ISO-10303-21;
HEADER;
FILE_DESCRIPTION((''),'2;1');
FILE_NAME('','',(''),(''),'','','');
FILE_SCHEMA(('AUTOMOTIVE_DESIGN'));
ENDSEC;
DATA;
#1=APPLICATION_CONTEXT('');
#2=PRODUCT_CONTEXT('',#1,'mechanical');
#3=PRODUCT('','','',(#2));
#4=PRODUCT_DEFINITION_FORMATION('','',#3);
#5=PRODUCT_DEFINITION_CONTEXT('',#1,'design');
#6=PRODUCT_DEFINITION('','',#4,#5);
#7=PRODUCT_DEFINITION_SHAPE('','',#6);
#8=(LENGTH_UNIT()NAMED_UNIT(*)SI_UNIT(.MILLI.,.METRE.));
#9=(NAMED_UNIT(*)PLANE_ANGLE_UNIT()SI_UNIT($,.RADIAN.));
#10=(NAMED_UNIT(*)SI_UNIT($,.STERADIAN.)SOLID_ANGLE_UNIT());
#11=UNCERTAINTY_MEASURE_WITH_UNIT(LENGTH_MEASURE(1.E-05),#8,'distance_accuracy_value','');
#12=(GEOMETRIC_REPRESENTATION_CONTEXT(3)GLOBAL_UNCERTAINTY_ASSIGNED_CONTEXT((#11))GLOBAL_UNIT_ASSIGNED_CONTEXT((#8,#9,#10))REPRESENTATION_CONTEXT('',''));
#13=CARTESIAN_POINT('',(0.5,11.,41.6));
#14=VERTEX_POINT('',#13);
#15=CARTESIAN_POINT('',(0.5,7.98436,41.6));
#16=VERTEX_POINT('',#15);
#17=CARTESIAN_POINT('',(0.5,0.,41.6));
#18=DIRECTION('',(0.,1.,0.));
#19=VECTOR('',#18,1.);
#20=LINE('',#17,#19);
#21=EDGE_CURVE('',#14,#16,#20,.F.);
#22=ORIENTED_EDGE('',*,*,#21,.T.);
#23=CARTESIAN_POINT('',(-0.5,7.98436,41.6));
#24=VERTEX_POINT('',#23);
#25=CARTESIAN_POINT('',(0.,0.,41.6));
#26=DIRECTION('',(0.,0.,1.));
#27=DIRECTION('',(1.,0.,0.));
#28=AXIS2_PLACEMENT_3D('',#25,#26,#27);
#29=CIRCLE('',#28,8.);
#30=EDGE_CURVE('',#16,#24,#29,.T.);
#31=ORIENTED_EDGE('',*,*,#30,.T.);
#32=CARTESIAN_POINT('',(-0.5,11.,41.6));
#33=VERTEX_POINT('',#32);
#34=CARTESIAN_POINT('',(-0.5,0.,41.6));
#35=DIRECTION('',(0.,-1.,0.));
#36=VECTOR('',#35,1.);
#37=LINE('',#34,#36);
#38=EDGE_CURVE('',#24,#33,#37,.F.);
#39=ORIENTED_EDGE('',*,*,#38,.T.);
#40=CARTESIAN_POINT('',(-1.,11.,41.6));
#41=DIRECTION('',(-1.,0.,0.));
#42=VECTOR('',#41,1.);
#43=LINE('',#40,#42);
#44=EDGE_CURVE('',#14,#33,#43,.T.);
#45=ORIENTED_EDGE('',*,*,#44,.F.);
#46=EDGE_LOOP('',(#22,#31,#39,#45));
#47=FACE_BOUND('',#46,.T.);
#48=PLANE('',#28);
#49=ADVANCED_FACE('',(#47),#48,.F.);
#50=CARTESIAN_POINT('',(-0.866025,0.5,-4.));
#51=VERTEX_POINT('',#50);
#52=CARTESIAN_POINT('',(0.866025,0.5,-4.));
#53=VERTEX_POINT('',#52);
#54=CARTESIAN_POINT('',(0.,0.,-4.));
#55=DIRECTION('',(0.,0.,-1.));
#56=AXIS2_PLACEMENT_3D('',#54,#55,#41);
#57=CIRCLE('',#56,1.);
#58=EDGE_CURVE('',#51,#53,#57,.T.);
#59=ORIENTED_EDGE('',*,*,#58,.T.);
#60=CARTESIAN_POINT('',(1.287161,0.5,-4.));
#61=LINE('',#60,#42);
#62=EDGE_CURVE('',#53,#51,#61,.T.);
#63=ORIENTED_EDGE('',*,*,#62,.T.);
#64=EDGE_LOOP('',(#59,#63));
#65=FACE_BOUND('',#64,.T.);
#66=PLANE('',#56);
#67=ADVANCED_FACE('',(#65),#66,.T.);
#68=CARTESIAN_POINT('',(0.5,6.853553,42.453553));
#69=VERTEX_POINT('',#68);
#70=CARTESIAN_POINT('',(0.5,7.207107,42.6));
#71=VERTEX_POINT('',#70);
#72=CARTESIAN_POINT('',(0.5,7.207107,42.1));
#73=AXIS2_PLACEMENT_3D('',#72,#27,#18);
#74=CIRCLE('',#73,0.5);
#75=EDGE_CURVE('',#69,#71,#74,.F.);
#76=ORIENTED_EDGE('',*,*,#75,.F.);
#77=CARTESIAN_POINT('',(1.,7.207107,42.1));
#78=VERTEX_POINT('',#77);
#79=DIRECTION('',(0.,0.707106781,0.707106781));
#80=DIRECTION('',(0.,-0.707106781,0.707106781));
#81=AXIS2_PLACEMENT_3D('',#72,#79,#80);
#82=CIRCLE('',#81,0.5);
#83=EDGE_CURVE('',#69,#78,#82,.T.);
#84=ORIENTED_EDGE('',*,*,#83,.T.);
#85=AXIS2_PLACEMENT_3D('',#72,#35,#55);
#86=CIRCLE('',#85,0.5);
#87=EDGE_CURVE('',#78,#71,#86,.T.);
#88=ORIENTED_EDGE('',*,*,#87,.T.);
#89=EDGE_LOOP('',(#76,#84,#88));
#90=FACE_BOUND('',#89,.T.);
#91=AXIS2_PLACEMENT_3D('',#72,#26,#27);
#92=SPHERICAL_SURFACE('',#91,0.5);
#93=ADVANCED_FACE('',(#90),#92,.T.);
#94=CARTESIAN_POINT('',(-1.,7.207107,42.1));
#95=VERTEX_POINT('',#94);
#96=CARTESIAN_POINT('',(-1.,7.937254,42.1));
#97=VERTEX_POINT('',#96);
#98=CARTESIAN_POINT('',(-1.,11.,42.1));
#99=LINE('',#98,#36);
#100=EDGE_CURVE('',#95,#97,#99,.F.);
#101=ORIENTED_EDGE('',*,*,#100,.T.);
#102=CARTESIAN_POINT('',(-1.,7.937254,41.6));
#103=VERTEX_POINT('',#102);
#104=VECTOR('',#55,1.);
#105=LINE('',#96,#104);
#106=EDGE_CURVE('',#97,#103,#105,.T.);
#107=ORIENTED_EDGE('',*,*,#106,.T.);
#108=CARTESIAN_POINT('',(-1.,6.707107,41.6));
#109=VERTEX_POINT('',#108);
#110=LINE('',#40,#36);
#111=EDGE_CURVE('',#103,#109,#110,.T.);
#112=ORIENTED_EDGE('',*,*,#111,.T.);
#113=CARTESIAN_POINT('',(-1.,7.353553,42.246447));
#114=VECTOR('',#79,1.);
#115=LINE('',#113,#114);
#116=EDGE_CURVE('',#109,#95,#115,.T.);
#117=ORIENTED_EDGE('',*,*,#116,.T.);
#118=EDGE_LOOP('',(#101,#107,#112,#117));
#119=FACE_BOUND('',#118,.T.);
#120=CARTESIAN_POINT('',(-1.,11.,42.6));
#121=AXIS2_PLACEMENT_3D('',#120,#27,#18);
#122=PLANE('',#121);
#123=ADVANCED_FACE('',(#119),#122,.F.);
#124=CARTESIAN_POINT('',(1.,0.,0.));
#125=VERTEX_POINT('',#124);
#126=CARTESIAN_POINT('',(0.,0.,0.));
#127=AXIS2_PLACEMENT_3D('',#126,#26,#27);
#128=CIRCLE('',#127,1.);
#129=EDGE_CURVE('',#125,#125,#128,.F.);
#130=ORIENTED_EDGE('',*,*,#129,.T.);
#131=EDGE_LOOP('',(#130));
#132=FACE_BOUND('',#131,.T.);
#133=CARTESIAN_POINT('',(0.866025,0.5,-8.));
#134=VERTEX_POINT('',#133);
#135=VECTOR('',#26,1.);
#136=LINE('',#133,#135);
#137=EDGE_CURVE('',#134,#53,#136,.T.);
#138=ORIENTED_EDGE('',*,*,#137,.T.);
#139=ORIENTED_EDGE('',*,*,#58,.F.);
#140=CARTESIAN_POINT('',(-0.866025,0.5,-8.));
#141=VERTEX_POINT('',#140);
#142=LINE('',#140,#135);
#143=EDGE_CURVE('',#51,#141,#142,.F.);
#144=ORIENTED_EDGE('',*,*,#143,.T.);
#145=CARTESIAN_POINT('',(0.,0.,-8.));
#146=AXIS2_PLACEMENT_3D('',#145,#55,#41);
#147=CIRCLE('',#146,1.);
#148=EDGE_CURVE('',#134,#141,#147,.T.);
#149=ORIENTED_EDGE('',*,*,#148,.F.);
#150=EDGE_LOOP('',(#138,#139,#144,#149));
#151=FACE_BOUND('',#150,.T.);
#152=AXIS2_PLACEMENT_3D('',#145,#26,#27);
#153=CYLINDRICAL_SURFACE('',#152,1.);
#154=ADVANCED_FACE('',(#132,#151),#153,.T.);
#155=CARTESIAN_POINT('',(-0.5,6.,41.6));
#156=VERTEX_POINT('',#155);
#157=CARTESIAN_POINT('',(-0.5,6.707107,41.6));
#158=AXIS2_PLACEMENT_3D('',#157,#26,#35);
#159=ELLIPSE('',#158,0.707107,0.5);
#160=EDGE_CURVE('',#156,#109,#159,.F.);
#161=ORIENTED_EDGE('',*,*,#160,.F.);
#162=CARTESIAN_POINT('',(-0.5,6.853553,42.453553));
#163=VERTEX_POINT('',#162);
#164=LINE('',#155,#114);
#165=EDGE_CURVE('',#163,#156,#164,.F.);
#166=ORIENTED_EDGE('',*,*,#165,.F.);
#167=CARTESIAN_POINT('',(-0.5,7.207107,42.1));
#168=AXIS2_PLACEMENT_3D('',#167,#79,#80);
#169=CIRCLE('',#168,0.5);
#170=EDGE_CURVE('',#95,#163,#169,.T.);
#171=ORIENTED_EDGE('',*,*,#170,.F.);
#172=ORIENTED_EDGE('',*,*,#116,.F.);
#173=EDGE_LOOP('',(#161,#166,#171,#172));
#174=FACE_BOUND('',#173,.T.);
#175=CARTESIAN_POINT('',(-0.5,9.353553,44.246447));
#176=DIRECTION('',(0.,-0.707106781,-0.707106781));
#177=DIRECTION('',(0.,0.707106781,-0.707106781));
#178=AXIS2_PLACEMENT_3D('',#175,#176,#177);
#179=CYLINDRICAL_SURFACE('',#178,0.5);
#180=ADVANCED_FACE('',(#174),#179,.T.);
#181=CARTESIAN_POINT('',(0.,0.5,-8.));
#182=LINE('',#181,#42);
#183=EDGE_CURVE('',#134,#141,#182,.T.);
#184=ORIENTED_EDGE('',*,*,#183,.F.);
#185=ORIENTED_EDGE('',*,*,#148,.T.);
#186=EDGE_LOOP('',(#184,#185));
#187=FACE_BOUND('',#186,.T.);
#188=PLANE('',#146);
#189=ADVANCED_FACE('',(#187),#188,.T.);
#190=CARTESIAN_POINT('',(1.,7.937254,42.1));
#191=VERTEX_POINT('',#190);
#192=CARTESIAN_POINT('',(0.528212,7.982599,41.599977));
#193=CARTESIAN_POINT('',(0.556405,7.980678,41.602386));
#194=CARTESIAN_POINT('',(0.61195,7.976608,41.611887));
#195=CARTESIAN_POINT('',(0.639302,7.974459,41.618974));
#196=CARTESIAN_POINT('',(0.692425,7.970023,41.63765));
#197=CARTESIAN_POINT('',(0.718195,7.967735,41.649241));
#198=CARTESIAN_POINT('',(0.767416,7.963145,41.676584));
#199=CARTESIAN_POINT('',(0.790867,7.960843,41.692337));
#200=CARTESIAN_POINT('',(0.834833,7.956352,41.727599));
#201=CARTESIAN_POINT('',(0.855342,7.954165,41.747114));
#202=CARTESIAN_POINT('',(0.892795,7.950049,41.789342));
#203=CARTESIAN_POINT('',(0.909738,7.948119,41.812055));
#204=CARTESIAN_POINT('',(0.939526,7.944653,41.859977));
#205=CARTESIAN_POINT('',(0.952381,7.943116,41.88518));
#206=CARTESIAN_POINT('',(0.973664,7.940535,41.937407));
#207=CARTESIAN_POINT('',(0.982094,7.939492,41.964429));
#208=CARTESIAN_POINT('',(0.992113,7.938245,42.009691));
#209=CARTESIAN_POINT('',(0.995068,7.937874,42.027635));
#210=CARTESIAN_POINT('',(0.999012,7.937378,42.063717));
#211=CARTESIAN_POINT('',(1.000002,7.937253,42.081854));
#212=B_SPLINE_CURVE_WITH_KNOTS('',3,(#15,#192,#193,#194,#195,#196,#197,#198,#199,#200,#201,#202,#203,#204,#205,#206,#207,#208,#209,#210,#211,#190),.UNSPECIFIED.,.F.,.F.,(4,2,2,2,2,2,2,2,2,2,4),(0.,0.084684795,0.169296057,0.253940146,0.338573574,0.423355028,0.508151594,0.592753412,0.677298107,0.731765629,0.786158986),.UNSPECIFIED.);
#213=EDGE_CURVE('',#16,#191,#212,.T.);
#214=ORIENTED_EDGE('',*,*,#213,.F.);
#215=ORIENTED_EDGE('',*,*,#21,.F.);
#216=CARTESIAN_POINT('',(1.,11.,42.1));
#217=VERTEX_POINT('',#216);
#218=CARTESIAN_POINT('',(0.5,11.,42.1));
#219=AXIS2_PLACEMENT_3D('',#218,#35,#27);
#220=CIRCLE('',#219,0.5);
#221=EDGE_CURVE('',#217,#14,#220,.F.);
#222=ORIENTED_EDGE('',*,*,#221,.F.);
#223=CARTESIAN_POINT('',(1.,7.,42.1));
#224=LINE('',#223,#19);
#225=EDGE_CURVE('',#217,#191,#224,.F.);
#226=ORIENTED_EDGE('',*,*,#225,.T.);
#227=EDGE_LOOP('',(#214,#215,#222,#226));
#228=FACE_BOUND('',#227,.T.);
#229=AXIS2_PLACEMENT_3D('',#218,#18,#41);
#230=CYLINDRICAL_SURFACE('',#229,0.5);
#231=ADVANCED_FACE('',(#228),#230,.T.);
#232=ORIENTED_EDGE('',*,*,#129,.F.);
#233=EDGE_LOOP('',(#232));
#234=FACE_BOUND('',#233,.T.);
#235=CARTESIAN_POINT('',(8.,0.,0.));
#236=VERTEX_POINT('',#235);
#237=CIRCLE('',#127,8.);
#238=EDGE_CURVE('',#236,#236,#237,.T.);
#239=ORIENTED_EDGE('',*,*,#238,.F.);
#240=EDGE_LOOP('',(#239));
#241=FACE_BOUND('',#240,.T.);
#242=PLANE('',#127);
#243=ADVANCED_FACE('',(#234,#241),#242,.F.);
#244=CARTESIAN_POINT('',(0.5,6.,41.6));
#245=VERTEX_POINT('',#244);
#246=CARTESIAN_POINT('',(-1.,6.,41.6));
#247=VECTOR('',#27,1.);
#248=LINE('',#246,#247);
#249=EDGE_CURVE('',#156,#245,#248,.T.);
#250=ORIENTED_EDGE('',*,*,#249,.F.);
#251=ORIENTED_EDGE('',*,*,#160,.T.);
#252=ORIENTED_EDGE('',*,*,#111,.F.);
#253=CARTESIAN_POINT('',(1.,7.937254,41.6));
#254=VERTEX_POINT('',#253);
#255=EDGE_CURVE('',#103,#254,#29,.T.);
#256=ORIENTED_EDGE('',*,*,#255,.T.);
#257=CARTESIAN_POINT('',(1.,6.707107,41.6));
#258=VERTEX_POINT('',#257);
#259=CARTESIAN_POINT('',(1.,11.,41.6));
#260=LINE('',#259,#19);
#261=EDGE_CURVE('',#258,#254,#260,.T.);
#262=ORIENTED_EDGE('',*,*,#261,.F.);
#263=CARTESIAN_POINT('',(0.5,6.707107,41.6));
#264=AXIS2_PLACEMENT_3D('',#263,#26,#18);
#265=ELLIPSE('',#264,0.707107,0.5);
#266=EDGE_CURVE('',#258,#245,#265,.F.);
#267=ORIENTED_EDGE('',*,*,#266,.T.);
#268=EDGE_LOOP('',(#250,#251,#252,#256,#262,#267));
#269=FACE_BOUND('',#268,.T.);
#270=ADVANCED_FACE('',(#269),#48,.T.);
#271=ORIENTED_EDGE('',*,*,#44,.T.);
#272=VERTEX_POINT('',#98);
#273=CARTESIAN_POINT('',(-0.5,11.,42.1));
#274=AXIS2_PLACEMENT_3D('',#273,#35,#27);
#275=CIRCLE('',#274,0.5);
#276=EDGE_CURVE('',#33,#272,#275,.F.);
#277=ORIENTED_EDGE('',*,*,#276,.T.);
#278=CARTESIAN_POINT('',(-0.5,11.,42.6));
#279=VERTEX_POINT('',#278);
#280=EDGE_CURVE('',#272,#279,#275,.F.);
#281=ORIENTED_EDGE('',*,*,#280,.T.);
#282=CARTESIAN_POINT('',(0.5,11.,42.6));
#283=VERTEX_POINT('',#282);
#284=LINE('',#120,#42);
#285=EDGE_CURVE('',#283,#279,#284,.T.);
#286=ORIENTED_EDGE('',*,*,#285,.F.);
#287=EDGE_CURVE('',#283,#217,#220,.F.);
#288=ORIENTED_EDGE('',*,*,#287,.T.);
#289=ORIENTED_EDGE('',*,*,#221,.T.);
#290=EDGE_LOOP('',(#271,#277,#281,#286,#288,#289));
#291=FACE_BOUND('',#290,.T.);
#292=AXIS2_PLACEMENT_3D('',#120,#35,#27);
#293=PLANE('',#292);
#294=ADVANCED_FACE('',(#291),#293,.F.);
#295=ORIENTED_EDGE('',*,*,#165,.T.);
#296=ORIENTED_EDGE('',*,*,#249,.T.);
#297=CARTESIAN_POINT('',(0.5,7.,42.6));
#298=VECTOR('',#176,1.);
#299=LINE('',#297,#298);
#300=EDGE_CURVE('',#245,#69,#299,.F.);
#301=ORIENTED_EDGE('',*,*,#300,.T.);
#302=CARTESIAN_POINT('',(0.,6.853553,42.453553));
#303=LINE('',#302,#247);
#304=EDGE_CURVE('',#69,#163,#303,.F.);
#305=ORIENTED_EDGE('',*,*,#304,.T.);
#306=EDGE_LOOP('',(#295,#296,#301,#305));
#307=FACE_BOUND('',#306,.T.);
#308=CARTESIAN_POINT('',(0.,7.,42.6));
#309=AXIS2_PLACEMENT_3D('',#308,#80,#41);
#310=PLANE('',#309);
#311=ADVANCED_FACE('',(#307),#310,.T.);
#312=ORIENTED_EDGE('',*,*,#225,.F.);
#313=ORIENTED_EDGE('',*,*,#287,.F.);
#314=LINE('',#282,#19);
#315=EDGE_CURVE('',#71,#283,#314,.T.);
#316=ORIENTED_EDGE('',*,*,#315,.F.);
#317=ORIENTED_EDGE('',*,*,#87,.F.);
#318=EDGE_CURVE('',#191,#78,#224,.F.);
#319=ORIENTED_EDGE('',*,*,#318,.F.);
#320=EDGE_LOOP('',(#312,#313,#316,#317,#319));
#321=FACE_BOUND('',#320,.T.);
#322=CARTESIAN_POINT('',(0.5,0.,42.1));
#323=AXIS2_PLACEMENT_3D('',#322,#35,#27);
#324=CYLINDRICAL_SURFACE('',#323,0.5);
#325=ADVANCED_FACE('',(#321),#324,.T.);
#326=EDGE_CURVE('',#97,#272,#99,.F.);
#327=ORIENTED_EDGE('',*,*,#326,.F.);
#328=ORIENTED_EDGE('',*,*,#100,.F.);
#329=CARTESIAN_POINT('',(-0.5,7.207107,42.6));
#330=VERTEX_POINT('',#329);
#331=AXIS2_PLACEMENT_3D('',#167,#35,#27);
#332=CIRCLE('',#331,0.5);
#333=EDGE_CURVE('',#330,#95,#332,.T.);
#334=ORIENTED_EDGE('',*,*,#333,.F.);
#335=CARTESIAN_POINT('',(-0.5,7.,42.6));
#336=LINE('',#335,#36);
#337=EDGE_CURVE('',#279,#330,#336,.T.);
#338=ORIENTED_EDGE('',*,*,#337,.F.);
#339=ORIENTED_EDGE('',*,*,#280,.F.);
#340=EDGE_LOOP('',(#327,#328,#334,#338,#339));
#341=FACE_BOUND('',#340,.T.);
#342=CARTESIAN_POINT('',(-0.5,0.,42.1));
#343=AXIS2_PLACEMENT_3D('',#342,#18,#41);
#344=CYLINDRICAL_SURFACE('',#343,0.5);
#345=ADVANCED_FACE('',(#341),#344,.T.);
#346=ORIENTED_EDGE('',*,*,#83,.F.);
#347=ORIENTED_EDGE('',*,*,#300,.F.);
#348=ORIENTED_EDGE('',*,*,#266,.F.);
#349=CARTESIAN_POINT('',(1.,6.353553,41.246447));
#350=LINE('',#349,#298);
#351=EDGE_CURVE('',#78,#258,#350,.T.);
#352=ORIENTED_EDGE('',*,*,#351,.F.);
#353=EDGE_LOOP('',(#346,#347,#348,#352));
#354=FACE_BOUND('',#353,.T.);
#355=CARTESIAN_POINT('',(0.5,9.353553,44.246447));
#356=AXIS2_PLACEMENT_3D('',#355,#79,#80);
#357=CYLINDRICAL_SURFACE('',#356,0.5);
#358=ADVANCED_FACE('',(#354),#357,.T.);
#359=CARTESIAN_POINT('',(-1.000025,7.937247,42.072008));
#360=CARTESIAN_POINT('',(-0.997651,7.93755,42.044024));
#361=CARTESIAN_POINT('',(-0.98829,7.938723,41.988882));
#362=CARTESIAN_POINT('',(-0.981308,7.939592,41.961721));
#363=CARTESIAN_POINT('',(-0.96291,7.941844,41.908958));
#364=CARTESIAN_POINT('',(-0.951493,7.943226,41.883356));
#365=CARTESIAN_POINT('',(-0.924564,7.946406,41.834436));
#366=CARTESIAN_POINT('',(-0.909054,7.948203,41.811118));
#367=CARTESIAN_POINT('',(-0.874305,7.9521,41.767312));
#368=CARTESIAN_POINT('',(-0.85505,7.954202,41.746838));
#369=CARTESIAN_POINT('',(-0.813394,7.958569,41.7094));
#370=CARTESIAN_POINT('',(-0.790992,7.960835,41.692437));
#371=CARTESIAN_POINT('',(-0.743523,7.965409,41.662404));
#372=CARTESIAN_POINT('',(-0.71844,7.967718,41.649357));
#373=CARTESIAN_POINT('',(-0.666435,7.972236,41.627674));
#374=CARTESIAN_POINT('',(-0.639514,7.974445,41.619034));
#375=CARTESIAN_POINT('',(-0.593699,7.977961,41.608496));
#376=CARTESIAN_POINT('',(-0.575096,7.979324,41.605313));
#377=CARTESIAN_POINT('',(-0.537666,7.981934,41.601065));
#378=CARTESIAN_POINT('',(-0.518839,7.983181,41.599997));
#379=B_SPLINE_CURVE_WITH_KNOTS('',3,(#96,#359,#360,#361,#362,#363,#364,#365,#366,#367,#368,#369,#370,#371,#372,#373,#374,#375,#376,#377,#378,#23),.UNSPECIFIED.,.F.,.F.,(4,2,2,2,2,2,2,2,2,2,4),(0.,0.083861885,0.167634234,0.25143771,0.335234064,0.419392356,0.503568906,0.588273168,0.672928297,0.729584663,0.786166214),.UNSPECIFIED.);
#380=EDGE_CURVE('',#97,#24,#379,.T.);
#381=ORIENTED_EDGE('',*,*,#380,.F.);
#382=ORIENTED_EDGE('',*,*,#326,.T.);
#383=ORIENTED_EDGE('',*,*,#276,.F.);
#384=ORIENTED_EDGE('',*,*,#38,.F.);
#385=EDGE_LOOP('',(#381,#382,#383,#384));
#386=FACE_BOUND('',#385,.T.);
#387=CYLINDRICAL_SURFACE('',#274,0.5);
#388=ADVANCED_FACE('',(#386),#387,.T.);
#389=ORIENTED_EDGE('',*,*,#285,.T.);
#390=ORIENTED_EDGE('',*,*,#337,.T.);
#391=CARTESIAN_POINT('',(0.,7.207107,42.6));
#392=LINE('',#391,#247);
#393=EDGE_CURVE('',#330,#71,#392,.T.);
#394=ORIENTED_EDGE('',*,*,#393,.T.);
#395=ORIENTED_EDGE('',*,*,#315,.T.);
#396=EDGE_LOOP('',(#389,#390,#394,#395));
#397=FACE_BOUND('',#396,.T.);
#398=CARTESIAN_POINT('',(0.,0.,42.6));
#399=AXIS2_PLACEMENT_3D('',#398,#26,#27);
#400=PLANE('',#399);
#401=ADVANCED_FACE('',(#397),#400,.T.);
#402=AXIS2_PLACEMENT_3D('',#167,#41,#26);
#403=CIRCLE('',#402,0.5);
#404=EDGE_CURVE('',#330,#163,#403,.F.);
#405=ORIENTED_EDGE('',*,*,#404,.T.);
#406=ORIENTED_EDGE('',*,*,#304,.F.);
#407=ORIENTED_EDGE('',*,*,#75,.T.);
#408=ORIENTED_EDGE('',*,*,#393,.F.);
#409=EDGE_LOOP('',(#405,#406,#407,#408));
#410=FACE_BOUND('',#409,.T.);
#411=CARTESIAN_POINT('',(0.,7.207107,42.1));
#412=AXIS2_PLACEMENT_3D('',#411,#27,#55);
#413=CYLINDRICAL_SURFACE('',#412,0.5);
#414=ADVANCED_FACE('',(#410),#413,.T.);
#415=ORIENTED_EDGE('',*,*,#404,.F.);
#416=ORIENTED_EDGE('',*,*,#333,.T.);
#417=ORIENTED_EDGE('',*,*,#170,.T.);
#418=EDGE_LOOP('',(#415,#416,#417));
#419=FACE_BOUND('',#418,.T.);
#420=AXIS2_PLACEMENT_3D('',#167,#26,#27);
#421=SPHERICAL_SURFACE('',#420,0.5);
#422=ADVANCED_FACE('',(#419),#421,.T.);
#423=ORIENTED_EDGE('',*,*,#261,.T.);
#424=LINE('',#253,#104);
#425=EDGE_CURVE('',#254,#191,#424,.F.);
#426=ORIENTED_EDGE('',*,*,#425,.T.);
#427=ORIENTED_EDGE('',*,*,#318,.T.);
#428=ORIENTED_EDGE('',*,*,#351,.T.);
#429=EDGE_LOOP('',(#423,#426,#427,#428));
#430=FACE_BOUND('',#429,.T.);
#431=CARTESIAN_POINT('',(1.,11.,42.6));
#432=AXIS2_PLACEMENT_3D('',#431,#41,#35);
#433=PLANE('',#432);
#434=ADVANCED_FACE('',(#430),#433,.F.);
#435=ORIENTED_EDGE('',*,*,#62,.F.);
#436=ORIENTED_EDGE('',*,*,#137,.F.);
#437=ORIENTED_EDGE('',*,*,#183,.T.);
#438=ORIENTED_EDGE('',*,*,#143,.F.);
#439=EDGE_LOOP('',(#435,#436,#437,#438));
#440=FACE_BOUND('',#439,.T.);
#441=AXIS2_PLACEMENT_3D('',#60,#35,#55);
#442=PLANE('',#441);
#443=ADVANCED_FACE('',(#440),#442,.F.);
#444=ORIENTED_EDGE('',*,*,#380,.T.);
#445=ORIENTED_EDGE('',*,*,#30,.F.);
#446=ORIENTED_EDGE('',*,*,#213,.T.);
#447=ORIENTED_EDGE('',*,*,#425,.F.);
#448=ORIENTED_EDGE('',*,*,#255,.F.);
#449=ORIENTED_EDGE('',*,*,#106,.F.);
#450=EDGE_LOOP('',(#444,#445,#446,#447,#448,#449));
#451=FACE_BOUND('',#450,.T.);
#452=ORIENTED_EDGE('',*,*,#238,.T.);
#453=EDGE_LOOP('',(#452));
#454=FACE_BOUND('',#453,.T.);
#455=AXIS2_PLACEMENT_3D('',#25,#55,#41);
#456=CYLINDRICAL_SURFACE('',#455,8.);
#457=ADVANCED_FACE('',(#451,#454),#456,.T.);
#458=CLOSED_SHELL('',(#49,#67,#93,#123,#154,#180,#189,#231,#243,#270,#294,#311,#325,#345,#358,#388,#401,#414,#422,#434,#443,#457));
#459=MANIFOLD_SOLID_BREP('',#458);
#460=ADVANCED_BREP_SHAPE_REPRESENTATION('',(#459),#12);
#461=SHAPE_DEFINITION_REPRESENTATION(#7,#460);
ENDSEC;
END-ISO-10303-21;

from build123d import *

# Parameters (mm, degrees)
SKETCH1_R           = 8
BOSS_EXTRUDE1_DEPTH = 41.6
SKETCH2_W           = 2
SKETCH2_H           = 5
BOSS_EXTRUDE2_DEPTH = 1
CHAMFER1_SIZE       = 1
FILLET1_R           = 0.5
FILLET2_R           = 0.5
SKETCH3_R           = 1
BOSS_EXTRUDE3_DEPTH = 8
SKETCH4_W           = 2.782468735
SKETCH4_H           = 1.387929773
CUT_EXTRUDE1_DEPTH  = 4


# Some blends are built 0.0001 mm under size
with BuildPart() as part:
    # Sketch1 → Boss-Extrude1 (new body)
    with BuildSketch(Plane.XY):
        Circle(SKETCH1_R)
    extrude(amount=BOSS_EXTRUDE1_DEPTH)

    # Sketch2 → Boss-Extrude2 (add)
    with BuildSketch(Plane.XY.offset(41.6)):
        with Locations((0, 8.5)):
            Rectangle(SKETCH2_W, SKETCH2_H)
    extrude(amount=BOSS_EXTRUDE2_DEPTH)

    # Chamfer1
    chamfer1_edges = [part.edges().sort_by_distance(p)[0] for p in [
        (0, 6, 42.6),
    ]]
    chamfer(chamfer1_edges, length=CHAMFER1_SIZE - 0.0001)  # a hair under: the kernel refuses the full size

    # Fillet1
    fillet1_edges = [part.edges().sort_by_distance(p)[0] for p in [
        (1, 8.99995, 42.6),
        (0, 6.9999, 42.6),
        (1, 6.49995, 42.10005),
        (-1, 6.49995, 42.10005),
        (-1, 8.99995, 42.6),
    ]]
    fillet(fillet1_edges, radius=FILLET1_R)

    # Fillet2
    # the kernel refuses this fillet: 0.5 mm, written as the material it takes off along each edge
    with BuildSketch(Plane(origin=(-1, 6.687253933, 41.6), x_dir=(0, 0, 1), z_dir=(0, 1, 0))) as fillet2_piece_1_section:
        with BuildLine():
            CenterArc((FILLET2_R, FILLET2_R), FILLET2_R, 180, 90)
            Line((0, FILLET2_R), (-FILLET2_R * 0.02, FILLET2_R))
            Line((-FILLET2_R * 0.02, FILLET2_R), (-FILLET2_R * 0.02, -FILLET2_R * 0.02))
            Line((-FILLET2_R * 0.02, -FILLET2_R * 0.02), (FILLET2_R, -FILLET2_R * 0.02))
            Line((FILLET2_R, -FILLET2_R * 0.02), (FILLET2_R, 0))
        make_face()
    fillet2_piece_1 = extrude(amount=4.312746067, mode=Mode.PRIVATE)
    fillet2_piece_1 = split(fillet2_piece_1, bisect_by=Plane(origin=(-0.898582018, 9.474400051, 41.6), z_dir=(0, 0, 1)), keep=Keep.TOP, mode=Mode.PRIVATE)
    fillet2_piece_1 = fillet2_piece_1 - Plane(origin=(0, 0, 41.723690259), x_dir=(1, 0, 0), z_dir=(0, 0, -1)) * Cylinder(8, 11, mode=Mode.PRIVATE)
    add(fillet2_piece_1, mode=Mode.SUBTRACT)
    with BuildSketch(Plane(origin=(1, 11, 41.6), x_dir=(-1, 0, 0), z_dir=(0, -1, 0))) as fillet2_piece_2_section:
        with BuildLine():
            CenterArc((FILLET2_R, -FILLET2_R), FILLET2_R, 90, 90)
            Line((0, -FILLET2_R), (-FILLET2_R * 0.02, -FILLET2_R))
            Line((-FILLET2_R * 0.02, -FILLET2_R), (-FILLET2_R * 0.02, FILLET2_R * 0.02))
            Line((-FILLET2_R * 0.02, FILLET2_R * 0.02), (FILLET2_R, FILLET2_R * 0.02))
            Line((FILLET2_R, FILLET2_R * 0.02), (FILLET2_R, 0))
        make_face()
    fillet2_piece_2 = extrude(amount=4.312746067, mode=Mode.PRIVATE)
    fillet2_piece_2 = split(fillet2_piece_2, bisect_by=Plane(origin=(0.898581764, 9.474398488, 41.6), z_dir=(0, 0, 1)), keep=Keep.TOP, mode=Mode.PRIVATE)
    fillet2_piece_2 = fillet2_piece_2 - Plane(origin=(0, 0, 41.723690294), x_dir=(1, 0, 0), z_dir=(0, 0, -1)) * Cylinder(8, 11, mode=Mode.PRIVATE)
    add(fillet2_piece_2, mode=Mode.SUBTRACT)

    # Sketch3 → Boss-Extrude3 (add)
    with BuildSketch(Plane(origin=(0, 0, 0), x_dir=(-1, 0, 0), z_dir=(0, 0, -1))):
        with Locations(Location((0, 0, 0), (0, 0, 180))):
            Circle(SKETCH3_R)
    extrude(amount=BOSS_EXTRUDE3_DEPTH)

    # Sketch4 → Cut-Extrude1 (cut)
    with BuildSketch(Plane(origin=(0, 0, -8), x_dir=(-1, 0, 0), z_dir=(0, 0, -1))):
        with Locations((0.104073174, 1.193964887)):
            Rectangle(SKETCH4_W, SKETCH4_H)
    extrude(amount=-CUT_EXTRUDE1_DEPTH, mode=Mode.SUBTRACT)


solid = part.part
